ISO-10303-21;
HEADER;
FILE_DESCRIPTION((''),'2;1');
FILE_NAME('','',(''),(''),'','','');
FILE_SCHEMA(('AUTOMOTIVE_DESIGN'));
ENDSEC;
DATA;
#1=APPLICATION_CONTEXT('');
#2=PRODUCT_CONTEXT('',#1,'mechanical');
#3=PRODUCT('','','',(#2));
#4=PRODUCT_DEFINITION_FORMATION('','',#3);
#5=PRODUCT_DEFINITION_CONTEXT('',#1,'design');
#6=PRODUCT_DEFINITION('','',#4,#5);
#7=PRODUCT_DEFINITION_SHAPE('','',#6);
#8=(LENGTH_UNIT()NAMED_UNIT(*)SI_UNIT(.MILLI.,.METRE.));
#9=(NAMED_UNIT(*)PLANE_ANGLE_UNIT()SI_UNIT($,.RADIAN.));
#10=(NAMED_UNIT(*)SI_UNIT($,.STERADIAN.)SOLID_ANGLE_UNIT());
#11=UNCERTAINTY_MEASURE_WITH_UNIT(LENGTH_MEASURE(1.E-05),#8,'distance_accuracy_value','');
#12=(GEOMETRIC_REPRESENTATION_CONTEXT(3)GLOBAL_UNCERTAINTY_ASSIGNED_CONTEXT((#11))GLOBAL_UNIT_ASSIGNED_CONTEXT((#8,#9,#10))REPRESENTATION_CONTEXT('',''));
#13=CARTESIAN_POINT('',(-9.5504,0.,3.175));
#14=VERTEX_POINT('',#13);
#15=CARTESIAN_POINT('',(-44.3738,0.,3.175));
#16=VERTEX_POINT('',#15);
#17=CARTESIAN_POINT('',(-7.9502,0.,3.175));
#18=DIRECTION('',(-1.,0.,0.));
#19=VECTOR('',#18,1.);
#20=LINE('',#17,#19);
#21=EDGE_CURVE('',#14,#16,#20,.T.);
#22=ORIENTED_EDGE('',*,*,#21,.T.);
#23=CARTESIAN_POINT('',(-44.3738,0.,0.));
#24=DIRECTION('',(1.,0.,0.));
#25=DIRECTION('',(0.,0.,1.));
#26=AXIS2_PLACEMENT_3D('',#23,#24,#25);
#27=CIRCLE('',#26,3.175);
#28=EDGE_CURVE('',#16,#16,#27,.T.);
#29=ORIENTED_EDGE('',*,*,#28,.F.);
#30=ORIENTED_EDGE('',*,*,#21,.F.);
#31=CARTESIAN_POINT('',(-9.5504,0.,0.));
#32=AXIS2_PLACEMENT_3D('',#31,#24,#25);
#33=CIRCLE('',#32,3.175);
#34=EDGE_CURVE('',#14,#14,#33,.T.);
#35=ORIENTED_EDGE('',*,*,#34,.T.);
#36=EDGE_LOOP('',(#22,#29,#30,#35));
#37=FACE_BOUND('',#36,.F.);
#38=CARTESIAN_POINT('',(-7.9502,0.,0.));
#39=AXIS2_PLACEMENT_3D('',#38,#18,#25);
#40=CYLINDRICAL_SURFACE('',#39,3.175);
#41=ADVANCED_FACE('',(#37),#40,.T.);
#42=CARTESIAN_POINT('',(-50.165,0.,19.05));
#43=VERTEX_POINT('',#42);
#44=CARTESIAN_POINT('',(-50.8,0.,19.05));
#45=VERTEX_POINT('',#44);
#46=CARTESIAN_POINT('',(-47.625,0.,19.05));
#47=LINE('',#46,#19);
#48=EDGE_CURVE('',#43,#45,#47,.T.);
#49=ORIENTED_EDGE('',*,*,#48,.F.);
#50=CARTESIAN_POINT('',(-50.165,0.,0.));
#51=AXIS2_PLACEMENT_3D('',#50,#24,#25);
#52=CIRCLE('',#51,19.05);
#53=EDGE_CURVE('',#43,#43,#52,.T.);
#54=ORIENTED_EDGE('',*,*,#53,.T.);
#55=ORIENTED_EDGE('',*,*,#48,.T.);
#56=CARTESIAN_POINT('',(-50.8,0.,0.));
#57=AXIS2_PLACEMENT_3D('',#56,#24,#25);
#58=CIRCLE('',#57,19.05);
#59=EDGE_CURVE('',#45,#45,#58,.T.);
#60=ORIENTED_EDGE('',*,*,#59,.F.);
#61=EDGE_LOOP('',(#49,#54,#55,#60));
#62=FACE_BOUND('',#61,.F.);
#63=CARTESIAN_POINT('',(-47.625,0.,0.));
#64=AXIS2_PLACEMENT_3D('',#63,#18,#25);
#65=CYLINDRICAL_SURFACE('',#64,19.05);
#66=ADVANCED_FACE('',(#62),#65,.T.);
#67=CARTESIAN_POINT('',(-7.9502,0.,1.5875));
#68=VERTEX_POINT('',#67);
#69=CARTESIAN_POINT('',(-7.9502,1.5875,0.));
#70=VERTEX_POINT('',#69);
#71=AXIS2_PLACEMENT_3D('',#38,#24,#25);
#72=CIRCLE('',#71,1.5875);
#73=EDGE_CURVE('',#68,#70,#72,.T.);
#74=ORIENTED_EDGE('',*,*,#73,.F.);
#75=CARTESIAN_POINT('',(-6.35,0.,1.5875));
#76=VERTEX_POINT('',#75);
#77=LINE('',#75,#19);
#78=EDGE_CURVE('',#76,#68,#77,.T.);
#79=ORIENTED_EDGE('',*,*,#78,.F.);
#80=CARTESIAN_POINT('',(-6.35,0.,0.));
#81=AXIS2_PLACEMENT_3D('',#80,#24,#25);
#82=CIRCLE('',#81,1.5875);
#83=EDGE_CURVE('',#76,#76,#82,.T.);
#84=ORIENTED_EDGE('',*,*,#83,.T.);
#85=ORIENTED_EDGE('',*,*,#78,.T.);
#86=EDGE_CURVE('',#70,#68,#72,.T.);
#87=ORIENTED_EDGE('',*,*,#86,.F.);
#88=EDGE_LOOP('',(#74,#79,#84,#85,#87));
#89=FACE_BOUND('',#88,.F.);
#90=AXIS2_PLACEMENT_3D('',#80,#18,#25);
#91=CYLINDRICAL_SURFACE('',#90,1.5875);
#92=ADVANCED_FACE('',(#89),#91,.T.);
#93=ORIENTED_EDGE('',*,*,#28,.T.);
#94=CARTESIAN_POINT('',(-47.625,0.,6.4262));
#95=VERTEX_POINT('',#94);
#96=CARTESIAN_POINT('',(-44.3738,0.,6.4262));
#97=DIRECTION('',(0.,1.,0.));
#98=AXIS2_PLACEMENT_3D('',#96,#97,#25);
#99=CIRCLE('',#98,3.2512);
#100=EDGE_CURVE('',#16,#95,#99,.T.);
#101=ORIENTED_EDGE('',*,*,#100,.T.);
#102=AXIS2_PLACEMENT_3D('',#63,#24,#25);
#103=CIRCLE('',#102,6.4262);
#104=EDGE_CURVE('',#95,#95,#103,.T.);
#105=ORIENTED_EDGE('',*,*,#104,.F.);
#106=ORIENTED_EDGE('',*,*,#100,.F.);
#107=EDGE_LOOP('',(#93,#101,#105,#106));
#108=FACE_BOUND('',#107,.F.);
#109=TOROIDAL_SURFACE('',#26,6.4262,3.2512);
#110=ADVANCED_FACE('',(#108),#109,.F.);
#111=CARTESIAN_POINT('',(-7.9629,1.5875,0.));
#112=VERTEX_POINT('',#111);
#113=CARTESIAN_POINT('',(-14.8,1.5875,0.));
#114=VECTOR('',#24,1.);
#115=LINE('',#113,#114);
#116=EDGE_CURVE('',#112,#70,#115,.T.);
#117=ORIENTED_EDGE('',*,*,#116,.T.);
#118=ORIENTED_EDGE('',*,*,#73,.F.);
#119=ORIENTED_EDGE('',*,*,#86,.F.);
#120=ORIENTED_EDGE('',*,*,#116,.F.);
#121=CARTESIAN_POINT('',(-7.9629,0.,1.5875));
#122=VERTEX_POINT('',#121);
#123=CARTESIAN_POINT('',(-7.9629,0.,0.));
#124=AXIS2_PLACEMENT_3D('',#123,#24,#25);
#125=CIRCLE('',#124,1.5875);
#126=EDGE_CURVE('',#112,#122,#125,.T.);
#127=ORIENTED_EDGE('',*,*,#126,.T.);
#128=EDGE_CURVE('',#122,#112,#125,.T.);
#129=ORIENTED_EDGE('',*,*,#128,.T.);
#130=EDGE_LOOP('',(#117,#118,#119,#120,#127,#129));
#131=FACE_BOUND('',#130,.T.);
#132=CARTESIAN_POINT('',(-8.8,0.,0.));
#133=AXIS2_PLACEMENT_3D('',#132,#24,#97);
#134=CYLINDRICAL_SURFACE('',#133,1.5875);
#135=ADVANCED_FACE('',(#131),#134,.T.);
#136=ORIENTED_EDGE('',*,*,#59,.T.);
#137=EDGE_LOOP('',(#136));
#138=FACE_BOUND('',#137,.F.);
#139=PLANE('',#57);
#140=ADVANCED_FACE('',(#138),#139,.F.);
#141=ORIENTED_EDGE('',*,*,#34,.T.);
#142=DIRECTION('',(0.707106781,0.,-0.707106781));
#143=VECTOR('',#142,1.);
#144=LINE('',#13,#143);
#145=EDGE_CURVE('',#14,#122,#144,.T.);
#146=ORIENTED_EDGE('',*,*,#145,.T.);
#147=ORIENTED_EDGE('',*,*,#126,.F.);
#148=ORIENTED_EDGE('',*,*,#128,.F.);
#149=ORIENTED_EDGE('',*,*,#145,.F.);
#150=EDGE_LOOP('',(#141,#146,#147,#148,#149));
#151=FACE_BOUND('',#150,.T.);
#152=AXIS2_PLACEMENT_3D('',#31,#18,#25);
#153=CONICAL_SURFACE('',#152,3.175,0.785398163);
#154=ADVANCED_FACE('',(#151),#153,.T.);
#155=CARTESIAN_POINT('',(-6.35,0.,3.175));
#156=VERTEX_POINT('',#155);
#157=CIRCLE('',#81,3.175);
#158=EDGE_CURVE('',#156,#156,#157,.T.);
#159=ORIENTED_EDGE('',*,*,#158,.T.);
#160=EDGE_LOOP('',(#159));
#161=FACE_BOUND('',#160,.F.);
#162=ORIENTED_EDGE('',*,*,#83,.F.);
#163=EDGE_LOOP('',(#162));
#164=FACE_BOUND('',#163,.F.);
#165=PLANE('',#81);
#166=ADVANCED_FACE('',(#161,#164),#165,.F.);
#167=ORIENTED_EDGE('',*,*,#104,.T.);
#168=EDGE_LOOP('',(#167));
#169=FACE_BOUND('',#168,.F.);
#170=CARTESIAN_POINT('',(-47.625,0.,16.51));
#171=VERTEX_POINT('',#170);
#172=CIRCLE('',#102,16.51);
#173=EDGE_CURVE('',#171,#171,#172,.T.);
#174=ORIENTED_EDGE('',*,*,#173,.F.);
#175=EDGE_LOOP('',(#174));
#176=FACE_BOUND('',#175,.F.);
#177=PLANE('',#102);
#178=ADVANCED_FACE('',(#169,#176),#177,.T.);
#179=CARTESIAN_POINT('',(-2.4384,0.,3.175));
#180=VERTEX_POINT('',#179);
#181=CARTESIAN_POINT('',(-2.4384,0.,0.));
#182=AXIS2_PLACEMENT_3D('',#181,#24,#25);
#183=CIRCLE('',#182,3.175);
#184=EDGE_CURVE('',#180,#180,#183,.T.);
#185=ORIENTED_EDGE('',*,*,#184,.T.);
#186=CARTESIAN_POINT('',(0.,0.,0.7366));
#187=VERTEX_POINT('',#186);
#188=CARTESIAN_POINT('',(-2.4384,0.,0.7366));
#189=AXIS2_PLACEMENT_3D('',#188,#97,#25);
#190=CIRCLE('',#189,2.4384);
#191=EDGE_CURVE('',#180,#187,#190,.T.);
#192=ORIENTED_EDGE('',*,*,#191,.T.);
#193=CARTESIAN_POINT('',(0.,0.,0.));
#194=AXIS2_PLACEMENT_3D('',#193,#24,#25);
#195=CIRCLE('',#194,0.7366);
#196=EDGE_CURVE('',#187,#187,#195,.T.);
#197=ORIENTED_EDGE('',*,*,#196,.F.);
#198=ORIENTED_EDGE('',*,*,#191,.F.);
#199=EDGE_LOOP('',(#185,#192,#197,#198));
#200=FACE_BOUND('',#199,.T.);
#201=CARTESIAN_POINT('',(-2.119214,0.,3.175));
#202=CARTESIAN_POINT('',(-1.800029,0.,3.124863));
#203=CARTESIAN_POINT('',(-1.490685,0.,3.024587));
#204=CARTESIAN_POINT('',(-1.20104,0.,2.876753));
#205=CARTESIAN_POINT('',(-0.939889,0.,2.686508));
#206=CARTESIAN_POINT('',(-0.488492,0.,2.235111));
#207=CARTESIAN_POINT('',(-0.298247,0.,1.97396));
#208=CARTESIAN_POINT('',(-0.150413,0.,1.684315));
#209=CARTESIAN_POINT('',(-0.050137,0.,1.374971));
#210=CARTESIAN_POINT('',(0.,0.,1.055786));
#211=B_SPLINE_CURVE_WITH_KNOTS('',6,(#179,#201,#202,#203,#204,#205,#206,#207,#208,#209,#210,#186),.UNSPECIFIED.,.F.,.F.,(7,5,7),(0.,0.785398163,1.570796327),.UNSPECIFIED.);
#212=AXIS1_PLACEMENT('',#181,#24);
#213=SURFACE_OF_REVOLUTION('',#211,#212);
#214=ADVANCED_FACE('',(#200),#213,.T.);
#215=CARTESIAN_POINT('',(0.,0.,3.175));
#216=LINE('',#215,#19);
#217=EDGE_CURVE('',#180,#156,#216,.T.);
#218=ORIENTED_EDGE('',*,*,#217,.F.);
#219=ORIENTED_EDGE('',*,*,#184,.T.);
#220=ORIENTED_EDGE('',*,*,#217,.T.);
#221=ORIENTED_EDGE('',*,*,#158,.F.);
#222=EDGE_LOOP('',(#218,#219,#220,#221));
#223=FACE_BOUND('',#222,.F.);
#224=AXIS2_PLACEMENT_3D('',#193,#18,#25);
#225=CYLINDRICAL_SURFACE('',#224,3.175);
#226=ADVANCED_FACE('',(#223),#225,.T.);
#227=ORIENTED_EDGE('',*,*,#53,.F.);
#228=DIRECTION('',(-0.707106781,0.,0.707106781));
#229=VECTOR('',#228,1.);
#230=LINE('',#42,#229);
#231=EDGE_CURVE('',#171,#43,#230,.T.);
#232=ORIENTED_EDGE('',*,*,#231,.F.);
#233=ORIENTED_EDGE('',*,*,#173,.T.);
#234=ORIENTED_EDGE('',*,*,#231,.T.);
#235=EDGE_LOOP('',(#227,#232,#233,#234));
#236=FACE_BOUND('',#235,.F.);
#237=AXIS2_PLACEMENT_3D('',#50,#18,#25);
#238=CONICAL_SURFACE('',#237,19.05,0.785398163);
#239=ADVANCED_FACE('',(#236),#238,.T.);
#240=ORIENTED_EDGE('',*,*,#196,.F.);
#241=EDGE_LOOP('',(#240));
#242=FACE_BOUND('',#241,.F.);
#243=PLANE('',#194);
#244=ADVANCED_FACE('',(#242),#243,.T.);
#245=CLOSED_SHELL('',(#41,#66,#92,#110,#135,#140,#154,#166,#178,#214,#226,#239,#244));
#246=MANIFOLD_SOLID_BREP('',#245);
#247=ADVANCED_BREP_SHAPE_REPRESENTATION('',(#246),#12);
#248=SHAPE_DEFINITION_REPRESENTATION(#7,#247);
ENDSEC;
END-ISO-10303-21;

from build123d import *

# Parameters (mm, degrees)
F2_R        = 3.2512
F3_SIZE2    = 2.54
F3_SIZE     = 2.54
F4_S5_R     = 1.5875
F4_T6_DEPTH = 6
F5_R        = 2.4384


# Not quite as in the source:
# - a fillet or chamfer that OpenCascade refuses, or shapes differently, is made with other operations: its cross-section is extruded or revolved along the edge and cut away or added


with BuildPart() as f1:
    # F0 (on Front) → F1 (revolve)
    with BuildSketch(Plane.XZ):
        Polygon((-50.8, 0), (0, 0), (0, 3.175), (-6.35, 3.175), (-6.35, 1.5875), (-7.9502, 1.5875), (-7.9502, 3.175), (-47.625, 3.175), (-47.625, 19.05), (-50.8, 19.05), align=None)
    revolve(axis=Axis((-25.4, 0, 0), (1, 0, 0)))

    # F2
    f2_edges = [f1.edges().sort_by_distance(p)[0] for p in [
        (-47.625, 0, -3.175),
    ]]
    fillet(f2_edges, radius=F2_R)

    # F3
    f3_edges = [f1.edges().sort_by_distance(p)[0] for p in [
        (-47.625, 0, -6.4262),
        (-47.625, 0, -19.05),
    ]]
    chamfer(f3_edges, length=F3_SIZE, length2=F3_SIZE2)

    # F4: chamfer of 1.6002 on 1 edges, made by hand


with BuildPart() as f4_tool2:
    # F4_s3 → F4_t4 (revolve)
    with BuildSketch(Plane.XZ):
        Polygon((-9.5504, 3.175), (-7.9502, 1.5748), (-7.9502, 3.175), align=None)
    revolve(axis=Axis((-7.9502, 0, 0), (1, 0, 0)))

    # F4_s5 → F4_t6 (cut, symmetric)
    with BuildSketch(Plane.YZ.offset(-8.8)):
        Circle(F4_S5_R)
    extrude(amount=F4_T6_DEPTH, both=True, mode=Mode.SUBTRACT)


with BuildPart() as f1_1:
    add(f1.part)

    # F4_t1: cut F4_tool2
    add(f4_tool2.part, mode=Mode.SUBTRACT)

    # F5
    f5_edges = [f1_1.edges().sort_by_distance(p)[0] for p in [
        (0, 0, -3.175),
    ]]
    fillet(f5_edges, radius=F5_R)


solid = f1_1.part
